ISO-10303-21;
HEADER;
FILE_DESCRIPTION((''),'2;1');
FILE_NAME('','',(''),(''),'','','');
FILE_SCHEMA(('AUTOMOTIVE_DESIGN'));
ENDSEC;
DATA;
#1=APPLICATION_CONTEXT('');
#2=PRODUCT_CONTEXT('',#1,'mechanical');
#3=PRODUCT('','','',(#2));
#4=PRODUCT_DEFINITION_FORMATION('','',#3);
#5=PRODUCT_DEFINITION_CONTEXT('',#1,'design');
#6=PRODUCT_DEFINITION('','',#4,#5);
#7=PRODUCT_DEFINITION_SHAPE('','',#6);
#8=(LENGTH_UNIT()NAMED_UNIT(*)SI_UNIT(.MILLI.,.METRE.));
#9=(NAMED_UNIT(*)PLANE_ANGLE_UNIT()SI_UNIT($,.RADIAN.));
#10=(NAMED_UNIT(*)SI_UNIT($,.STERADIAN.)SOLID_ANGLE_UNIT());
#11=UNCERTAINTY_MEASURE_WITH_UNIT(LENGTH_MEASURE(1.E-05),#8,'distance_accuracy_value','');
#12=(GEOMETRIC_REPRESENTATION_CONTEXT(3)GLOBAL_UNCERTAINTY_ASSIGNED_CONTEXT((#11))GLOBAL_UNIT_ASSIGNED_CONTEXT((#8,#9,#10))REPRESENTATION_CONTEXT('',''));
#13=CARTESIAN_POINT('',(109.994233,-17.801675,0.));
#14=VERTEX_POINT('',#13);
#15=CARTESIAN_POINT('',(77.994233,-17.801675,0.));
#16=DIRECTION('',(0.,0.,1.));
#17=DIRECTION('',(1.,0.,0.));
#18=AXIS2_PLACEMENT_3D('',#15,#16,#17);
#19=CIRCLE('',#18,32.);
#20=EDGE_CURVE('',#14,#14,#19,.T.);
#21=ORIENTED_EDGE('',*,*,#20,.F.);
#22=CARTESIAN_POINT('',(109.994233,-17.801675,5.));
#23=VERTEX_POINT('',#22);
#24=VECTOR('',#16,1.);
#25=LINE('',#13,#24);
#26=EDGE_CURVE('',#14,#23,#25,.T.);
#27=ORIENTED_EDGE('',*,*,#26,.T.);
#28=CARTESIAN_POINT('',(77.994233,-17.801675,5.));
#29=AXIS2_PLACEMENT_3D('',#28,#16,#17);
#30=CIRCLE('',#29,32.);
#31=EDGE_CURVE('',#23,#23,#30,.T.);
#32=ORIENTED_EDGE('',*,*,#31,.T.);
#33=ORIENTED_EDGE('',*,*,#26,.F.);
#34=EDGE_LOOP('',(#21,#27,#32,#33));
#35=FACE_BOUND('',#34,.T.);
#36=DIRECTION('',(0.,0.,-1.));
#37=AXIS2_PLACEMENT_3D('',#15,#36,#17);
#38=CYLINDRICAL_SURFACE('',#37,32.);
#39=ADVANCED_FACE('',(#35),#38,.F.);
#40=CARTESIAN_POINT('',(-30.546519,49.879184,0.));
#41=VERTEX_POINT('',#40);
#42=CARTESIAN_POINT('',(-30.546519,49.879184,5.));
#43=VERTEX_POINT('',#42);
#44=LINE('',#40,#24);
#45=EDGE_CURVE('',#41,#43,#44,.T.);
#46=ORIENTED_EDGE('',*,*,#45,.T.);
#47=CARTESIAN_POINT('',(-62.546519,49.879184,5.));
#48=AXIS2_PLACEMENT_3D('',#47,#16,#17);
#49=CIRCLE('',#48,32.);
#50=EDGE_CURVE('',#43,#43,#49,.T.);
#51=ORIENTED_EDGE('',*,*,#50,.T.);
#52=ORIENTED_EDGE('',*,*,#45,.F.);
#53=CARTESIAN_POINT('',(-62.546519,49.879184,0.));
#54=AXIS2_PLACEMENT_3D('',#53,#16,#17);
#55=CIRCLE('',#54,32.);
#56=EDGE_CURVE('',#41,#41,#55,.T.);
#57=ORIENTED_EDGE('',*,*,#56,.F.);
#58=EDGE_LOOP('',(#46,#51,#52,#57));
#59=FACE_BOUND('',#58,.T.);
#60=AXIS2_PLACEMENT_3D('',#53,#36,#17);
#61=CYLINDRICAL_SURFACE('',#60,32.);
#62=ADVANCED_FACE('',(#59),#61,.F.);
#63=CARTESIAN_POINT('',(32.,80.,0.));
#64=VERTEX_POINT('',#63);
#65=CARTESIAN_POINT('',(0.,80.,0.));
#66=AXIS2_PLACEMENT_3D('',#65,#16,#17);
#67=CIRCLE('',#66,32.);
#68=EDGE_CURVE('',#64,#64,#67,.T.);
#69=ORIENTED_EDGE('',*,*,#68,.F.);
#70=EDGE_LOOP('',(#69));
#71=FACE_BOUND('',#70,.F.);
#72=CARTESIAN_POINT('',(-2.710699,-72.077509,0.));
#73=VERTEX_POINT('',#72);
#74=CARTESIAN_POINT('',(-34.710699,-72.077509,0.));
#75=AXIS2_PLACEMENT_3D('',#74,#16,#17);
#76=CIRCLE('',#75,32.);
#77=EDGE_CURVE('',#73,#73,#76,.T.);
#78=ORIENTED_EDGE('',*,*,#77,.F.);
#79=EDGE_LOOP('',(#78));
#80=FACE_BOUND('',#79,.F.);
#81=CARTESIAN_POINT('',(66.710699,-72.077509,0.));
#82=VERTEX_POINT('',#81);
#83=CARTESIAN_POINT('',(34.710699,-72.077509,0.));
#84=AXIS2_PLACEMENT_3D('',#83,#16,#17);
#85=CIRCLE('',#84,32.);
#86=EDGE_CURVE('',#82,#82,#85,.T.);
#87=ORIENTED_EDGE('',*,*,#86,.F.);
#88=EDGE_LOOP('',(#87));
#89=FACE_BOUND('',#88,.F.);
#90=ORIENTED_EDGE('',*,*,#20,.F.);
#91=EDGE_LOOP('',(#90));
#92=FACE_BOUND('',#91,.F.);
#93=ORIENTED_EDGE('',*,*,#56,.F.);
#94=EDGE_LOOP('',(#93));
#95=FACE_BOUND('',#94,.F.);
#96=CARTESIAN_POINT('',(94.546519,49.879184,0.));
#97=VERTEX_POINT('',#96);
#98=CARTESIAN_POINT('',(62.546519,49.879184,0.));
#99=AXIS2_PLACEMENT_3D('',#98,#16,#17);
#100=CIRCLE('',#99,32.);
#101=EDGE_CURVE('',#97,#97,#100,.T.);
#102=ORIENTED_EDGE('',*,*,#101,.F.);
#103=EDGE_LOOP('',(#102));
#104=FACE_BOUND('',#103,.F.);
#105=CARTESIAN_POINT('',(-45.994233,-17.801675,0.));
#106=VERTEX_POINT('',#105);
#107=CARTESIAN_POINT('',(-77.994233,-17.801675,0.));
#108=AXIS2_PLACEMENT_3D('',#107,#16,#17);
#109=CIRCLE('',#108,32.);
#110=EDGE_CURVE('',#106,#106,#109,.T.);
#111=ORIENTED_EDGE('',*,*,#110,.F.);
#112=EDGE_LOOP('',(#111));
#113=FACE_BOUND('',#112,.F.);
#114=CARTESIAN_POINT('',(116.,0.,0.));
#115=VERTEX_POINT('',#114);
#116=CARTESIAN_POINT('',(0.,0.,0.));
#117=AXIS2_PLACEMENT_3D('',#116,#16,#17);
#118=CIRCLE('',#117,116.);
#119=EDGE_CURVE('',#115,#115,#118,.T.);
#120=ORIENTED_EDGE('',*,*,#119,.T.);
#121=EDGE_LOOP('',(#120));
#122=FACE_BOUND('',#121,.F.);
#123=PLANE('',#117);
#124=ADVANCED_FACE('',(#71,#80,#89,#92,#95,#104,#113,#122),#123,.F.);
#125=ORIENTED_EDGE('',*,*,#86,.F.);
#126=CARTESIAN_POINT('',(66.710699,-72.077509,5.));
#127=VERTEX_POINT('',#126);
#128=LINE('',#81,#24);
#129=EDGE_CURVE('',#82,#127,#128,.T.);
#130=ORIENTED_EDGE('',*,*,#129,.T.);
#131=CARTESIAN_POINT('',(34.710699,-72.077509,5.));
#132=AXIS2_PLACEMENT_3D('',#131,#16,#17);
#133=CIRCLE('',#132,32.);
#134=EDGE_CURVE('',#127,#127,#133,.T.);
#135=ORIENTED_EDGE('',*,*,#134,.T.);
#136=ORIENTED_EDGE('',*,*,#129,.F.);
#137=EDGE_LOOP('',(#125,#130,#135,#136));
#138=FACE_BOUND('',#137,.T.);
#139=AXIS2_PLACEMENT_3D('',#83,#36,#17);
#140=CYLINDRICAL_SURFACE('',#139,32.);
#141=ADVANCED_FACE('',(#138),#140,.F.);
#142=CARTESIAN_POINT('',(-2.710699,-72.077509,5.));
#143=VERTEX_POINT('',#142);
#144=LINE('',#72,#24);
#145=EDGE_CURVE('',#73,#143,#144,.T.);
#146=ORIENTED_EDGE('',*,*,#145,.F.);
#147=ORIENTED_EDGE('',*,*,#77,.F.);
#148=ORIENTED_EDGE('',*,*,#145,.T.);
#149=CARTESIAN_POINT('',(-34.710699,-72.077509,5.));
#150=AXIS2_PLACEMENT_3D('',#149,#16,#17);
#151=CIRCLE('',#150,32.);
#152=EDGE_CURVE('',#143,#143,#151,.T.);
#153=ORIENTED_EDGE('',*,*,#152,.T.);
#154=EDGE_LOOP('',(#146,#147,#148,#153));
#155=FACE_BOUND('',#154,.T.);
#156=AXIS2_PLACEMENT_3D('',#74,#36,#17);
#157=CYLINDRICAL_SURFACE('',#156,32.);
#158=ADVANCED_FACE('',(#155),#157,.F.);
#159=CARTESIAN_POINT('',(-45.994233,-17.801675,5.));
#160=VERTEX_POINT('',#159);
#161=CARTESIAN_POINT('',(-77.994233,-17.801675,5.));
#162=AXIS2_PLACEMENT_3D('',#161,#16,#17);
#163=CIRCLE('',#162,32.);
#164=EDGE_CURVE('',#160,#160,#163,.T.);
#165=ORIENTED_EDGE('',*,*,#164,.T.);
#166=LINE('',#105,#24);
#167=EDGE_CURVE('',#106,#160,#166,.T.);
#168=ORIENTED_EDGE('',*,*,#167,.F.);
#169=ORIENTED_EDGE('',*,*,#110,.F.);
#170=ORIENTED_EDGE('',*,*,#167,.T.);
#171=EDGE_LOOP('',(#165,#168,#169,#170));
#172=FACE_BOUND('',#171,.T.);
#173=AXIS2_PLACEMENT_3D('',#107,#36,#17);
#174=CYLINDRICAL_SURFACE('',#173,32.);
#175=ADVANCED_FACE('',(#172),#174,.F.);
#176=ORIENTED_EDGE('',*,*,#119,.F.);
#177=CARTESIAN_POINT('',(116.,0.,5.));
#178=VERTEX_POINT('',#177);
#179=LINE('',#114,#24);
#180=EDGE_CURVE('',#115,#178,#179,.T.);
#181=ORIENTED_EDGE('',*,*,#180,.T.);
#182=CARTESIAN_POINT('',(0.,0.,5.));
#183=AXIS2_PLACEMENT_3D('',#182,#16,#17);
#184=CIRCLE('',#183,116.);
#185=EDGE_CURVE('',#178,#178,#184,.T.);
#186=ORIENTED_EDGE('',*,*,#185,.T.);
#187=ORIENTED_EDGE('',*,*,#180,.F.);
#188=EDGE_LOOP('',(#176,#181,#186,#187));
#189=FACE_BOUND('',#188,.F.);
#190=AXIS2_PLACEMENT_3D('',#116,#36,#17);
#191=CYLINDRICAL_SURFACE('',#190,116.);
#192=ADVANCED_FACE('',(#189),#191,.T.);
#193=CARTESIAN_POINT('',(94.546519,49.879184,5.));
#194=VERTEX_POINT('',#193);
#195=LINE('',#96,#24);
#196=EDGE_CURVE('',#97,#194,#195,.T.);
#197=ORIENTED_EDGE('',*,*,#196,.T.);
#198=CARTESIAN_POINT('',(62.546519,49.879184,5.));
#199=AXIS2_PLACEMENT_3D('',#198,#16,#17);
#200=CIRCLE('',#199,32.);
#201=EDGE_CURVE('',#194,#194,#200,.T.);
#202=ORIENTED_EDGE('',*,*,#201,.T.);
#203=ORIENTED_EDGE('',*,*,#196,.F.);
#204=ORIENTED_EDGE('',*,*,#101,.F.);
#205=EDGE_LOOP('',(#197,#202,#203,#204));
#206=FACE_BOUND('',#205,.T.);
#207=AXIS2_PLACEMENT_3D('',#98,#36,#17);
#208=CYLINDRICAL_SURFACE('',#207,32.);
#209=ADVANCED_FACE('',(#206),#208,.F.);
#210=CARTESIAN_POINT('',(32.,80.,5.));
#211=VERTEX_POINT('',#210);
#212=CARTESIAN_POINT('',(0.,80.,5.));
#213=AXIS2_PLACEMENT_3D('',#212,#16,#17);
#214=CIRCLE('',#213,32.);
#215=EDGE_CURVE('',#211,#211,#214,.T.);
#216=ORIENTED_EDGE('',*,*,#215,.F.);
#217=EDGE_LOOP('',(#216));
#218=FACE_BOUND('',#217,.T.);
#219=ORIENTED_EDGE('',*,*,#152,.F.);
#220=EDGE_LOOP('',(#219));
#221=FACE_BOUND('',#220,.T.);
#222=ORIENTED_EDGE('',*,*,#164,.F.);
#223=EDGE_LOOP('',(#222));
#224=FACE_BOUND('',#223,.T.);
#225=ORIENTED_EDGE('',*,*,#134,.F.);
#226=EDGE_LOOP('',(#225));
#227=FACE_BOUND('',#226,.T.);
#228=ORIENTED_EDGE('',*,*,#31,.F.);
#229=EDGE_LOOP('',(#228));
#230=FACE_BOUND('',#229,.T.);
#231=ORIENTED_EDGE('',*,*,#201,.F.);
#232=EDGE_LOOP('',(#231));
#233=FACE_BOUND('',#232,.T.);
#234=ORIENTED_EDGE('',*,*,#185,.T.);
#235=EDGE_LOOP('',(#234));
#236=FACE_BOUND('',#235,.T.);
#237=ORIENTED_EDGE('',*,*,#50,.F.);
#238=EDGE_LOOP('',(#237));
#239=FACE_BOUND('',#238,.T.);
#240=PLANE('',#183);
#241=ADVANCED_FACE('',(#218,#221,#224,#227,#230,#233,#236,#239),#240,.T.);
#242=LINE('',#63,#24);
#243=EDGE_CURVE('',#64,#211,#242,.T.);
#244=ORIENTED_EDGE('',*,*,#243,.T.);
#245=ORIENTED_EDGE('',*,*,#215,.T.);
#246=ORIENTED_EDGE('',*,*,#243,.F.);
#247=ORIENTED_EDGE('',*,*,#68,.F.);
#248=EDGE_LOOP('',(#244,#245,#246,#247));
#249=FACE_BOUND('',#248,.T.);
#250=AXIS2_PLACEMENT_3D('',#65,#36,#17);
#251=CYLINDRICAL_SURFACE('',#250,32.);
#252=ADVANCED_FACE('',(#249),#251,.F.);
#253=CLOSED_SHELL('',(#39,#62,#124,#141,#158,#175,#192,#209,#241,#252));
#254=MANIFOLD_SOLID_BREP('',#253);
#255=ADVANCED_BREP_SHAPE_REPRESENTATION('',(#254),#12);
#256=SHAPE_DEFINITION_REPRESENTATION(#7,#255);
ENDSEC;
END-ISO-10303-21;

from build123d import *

# Parameters (mm, degrees)
F0_R     = 116
F0_R_2   = 32
F2_DEPTH = 5


# Not quite as in the source:
# - the program builds the solid bodies; features that only make, move or delete a surface that nothing else refers to are left out


with BuildPart() as f2:
    # F0 (on Top) → F2 (new body)
    with BuildSketch(Plane.XY):
        Circle(F0_R)
        with Locations((-34.7106991294, -72.0775094322)):
            Circle(F0_R_2, mode=Mode.SUBTRACT)
        with Locations((-77.9942329745, -17.8016747165)):
            Circle(F0_R_2, mode=Mode.SUBTRACT)
        with Locations((34.7106991294, -72.0775094322)):
            Circle(F0_R_2, mode=Mode.SUBTRACT)
        with Locations((77.9942329745, -17.8016747165)):
            Circle(F0_R_2, mode=Mode.SUBTRACT)
        with Locations((-62.5465185974, 49.8791841487)):
            Circle(F0_R_2, mode=Mode.SUBTRACT)
        with Locations((62.5465185974, 49.8791841487)):
            Circle(F0_R_2, mode=Mode.SUBTRACT)
        with Locations((0, 80)):
            Circle(F0_R_2, mode=Mode.SUBTRACT)
    extrude(amount=F2_DEPTH)


solid = f2.part
